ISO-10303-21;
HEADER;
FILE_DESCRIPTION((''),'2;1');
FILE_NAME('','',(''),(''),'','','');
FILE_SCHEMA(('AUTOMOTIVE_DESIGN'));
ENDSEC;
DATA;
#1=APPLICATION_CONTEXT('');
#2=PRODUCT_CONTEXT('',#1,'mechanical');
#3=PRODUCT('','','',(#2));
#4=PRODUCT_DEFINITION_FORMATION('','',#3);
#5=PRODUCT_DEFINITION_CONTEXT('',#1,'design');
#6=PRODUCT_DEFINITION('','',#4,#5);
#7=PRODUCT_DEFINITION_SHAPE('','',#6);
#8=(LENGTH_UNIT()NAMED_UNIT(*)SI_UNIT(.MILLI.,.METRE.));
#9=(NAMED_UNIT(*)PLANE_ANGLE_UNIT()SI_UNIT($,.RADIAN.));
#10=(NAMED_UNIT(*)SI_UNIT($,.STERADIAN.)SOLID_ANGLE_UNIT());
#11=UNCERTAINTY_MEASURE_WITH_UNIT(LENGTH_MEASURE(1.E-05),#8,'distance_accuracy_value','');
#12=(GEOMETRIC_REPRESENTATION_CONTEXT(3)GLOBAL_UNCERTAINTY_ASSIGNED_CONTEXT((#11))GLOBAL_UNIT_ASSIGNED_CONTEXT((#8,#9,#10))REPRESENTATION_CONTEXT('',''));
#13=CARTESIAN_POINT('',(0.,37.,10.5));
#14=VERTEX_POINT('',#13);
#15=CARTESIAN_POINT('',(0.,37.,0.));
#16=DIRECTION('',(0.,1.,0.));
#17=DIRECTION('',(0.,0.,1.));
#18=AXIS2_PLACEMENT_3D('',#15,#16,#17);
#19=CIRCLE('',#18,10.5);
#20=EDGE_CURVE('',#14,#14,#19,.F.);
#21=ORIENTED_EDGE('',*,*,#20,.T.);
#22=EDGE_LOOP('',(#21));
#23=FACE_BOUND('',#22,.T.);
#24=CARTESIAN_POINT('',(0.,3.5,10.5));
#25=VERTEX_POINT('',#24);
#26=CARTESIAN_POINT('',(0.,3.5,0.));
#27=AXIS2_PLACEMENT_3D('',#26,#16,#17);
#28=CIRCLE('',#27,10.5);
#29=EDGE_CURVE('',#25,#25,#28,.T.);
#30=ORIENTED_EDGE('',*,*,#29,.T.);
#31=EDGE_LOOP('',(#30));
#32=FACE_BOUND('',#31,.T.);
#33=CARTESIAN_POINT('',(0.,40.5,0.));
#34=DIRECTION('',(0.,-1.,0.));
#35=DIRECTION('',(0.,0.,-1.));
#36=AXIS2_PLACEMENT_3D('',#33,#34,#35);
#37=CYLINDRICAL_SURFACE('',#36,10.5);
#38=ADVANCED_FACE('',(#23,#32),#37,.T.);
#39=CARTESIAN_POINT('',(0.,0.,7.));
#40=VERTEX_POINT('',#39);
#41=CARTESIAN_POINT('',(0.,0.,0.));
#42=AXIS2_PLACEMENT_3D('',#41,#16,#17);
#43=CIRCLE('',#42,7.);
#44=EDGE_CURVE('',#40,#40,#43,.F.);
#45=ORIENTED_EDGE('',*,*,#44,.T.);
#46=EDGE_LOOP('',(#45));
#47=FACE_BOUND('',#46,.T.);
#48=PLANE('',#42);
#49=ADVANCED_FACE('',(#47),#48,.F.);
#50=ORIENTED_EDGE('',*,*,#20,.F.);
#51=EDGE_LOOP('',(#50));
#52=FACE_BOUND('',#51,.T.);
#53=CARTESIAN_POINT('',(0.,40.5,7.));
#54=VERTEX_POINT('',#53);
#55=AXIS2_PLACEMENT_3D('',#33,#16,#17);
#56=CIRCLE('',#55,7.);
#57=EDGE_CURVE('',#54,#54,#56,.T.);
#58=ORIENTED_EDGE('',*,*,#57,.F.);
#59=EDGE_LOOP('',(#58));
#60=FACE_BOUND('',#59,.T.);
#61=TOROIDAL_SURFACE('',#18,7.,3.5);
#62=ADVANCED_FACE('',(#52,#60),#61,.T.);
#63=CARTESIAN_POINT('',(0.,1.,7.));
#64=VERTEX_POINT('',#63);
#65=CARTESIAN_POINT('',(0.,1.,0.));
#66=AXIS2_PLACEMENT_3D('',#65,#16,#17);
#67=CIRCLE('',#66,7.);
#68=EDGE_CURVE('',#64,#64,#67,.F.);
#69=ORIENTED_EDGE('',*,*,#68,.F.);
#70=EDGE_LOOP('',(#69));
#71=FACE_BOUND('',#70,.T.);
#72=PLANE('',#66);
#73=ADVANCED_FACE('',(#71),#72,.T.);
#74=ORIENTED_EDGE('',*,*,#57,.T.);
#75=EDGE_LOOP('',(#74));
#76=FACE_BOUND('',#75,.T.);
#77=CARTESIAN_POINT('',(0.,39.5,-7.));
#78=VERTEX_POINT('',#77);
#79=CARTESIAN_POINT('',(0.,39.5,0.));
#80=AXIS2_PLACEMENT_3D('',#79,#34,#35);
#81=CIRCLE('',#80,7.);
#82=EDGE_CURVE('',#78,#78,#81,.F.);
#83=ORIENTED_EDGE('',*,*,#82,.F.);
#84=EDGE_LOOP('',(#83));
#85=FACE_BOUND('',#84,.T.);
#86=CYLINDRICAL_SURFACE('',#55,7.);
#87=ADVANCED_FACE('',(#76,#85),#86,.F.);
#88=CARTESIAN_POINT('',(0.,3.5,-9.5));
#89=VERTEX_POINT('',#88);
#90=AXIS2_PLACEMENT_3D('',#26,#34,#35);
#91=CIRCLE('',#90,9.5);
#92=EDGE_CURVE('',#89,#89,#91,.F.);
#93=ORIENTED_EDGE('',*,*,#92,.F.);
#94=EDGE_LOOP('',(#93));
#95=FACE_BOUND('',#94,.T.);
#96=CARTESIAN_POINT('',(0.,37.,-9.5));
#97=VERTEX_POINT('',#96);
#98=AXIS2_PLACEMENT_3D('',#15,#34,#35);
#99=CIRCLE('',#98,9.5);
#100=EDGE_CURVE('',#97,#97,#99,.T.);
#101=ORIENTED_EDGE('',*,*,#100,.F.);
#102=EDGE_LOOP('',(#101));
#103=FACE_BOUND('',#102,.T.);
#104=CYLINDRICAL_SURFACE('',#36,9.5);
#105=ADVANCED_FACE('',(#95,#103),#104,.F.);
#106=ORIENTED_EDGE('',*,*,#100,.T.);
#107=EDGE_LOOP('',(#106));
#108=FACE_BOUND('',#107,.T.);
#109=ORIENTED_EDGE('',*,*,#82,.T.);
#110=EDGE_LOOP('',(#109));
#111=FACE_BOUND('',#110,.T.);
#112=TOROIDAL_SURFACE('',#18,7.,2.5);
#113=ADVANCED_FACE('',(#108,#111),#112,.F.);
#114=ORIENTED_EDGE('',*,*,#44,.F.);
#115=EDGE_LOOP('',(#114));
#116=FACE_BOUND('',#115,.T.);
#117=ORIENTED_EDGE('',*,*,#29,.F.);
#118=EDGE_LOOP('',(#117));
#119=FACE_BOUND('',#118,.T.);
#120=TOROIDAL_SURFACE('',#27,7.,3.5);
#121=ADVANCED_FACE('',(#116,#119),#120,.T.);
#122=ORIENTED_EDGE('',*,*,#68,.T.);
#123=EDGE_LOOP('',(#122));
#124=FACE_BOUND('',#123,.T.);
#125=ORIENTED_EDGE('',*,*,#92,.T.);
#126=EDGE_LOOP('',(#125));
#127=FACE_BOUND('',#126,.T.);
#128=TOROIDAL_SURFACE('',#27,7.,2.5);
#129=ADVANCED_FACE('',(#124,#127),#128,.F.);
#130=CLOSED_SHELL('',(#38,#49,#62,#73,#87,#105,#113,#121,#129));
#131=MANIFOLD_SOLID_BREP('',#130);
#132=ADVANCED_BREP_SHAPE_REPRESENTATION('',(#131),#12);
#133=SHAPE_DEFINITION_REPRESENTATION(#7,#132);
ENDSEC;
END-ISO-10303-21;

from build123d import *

# Parameters (mm, degrees)
SKETCH1_R           = 10.5
BOSS_EXTRUDE1_DEPTH = 40.5
FILLET1_R           = 3.5


# Read off the part's stored shape, not the designer's step: Shell4
with BuildPart() as part:
    # Sketch1 → Boss-Extrude1 (new body)
    with BuildSketch(Plane(origin=(0, 0, 0), x_dir=(1, 0, 0), z_dir=(0, 1, 0))):
        with Locations(Location((0, 0, 0), (0, 0, 270))):
            Circle(SKETCH1_R)
    extrude(amount=BOSS_EXTRUDE1_DEPTH)

    # Fillet1
    fillet1_edges = [part.edges().sort_by_distance(p)[0] for p in [
        (0, 0, -10.5),
        (0, 40.5, -10.5),
    ]]
    fillet(fillet1_edges, radius=FILLET1_R)

    # Shell4 outline → Shell4 (revolve, cut)
    with BuildSketch(Plane.XY):
        with BuildLine():
            Line((0, 1), (7, 1))
            ThreePointArc((7, 1), (8.767766953, 1.732233047), (9.5, 3.5))
            Line((9.5, 3.5), (9.5, 37))
            ThreePointArc((9.5, 37), (8.767766953, 38.767766953), (7, 39.5))
            Line((7, 39.5), (7, 40.5))
            Line((7, 40.5), (0, 40.5))
            Line((0, 40.5), (0, 1))
        make_face()
    revolve(axis=Axis((0, 0, 0), (0, 1, 0)), mode=Mode.SUBTRACT)


solid = part.part
